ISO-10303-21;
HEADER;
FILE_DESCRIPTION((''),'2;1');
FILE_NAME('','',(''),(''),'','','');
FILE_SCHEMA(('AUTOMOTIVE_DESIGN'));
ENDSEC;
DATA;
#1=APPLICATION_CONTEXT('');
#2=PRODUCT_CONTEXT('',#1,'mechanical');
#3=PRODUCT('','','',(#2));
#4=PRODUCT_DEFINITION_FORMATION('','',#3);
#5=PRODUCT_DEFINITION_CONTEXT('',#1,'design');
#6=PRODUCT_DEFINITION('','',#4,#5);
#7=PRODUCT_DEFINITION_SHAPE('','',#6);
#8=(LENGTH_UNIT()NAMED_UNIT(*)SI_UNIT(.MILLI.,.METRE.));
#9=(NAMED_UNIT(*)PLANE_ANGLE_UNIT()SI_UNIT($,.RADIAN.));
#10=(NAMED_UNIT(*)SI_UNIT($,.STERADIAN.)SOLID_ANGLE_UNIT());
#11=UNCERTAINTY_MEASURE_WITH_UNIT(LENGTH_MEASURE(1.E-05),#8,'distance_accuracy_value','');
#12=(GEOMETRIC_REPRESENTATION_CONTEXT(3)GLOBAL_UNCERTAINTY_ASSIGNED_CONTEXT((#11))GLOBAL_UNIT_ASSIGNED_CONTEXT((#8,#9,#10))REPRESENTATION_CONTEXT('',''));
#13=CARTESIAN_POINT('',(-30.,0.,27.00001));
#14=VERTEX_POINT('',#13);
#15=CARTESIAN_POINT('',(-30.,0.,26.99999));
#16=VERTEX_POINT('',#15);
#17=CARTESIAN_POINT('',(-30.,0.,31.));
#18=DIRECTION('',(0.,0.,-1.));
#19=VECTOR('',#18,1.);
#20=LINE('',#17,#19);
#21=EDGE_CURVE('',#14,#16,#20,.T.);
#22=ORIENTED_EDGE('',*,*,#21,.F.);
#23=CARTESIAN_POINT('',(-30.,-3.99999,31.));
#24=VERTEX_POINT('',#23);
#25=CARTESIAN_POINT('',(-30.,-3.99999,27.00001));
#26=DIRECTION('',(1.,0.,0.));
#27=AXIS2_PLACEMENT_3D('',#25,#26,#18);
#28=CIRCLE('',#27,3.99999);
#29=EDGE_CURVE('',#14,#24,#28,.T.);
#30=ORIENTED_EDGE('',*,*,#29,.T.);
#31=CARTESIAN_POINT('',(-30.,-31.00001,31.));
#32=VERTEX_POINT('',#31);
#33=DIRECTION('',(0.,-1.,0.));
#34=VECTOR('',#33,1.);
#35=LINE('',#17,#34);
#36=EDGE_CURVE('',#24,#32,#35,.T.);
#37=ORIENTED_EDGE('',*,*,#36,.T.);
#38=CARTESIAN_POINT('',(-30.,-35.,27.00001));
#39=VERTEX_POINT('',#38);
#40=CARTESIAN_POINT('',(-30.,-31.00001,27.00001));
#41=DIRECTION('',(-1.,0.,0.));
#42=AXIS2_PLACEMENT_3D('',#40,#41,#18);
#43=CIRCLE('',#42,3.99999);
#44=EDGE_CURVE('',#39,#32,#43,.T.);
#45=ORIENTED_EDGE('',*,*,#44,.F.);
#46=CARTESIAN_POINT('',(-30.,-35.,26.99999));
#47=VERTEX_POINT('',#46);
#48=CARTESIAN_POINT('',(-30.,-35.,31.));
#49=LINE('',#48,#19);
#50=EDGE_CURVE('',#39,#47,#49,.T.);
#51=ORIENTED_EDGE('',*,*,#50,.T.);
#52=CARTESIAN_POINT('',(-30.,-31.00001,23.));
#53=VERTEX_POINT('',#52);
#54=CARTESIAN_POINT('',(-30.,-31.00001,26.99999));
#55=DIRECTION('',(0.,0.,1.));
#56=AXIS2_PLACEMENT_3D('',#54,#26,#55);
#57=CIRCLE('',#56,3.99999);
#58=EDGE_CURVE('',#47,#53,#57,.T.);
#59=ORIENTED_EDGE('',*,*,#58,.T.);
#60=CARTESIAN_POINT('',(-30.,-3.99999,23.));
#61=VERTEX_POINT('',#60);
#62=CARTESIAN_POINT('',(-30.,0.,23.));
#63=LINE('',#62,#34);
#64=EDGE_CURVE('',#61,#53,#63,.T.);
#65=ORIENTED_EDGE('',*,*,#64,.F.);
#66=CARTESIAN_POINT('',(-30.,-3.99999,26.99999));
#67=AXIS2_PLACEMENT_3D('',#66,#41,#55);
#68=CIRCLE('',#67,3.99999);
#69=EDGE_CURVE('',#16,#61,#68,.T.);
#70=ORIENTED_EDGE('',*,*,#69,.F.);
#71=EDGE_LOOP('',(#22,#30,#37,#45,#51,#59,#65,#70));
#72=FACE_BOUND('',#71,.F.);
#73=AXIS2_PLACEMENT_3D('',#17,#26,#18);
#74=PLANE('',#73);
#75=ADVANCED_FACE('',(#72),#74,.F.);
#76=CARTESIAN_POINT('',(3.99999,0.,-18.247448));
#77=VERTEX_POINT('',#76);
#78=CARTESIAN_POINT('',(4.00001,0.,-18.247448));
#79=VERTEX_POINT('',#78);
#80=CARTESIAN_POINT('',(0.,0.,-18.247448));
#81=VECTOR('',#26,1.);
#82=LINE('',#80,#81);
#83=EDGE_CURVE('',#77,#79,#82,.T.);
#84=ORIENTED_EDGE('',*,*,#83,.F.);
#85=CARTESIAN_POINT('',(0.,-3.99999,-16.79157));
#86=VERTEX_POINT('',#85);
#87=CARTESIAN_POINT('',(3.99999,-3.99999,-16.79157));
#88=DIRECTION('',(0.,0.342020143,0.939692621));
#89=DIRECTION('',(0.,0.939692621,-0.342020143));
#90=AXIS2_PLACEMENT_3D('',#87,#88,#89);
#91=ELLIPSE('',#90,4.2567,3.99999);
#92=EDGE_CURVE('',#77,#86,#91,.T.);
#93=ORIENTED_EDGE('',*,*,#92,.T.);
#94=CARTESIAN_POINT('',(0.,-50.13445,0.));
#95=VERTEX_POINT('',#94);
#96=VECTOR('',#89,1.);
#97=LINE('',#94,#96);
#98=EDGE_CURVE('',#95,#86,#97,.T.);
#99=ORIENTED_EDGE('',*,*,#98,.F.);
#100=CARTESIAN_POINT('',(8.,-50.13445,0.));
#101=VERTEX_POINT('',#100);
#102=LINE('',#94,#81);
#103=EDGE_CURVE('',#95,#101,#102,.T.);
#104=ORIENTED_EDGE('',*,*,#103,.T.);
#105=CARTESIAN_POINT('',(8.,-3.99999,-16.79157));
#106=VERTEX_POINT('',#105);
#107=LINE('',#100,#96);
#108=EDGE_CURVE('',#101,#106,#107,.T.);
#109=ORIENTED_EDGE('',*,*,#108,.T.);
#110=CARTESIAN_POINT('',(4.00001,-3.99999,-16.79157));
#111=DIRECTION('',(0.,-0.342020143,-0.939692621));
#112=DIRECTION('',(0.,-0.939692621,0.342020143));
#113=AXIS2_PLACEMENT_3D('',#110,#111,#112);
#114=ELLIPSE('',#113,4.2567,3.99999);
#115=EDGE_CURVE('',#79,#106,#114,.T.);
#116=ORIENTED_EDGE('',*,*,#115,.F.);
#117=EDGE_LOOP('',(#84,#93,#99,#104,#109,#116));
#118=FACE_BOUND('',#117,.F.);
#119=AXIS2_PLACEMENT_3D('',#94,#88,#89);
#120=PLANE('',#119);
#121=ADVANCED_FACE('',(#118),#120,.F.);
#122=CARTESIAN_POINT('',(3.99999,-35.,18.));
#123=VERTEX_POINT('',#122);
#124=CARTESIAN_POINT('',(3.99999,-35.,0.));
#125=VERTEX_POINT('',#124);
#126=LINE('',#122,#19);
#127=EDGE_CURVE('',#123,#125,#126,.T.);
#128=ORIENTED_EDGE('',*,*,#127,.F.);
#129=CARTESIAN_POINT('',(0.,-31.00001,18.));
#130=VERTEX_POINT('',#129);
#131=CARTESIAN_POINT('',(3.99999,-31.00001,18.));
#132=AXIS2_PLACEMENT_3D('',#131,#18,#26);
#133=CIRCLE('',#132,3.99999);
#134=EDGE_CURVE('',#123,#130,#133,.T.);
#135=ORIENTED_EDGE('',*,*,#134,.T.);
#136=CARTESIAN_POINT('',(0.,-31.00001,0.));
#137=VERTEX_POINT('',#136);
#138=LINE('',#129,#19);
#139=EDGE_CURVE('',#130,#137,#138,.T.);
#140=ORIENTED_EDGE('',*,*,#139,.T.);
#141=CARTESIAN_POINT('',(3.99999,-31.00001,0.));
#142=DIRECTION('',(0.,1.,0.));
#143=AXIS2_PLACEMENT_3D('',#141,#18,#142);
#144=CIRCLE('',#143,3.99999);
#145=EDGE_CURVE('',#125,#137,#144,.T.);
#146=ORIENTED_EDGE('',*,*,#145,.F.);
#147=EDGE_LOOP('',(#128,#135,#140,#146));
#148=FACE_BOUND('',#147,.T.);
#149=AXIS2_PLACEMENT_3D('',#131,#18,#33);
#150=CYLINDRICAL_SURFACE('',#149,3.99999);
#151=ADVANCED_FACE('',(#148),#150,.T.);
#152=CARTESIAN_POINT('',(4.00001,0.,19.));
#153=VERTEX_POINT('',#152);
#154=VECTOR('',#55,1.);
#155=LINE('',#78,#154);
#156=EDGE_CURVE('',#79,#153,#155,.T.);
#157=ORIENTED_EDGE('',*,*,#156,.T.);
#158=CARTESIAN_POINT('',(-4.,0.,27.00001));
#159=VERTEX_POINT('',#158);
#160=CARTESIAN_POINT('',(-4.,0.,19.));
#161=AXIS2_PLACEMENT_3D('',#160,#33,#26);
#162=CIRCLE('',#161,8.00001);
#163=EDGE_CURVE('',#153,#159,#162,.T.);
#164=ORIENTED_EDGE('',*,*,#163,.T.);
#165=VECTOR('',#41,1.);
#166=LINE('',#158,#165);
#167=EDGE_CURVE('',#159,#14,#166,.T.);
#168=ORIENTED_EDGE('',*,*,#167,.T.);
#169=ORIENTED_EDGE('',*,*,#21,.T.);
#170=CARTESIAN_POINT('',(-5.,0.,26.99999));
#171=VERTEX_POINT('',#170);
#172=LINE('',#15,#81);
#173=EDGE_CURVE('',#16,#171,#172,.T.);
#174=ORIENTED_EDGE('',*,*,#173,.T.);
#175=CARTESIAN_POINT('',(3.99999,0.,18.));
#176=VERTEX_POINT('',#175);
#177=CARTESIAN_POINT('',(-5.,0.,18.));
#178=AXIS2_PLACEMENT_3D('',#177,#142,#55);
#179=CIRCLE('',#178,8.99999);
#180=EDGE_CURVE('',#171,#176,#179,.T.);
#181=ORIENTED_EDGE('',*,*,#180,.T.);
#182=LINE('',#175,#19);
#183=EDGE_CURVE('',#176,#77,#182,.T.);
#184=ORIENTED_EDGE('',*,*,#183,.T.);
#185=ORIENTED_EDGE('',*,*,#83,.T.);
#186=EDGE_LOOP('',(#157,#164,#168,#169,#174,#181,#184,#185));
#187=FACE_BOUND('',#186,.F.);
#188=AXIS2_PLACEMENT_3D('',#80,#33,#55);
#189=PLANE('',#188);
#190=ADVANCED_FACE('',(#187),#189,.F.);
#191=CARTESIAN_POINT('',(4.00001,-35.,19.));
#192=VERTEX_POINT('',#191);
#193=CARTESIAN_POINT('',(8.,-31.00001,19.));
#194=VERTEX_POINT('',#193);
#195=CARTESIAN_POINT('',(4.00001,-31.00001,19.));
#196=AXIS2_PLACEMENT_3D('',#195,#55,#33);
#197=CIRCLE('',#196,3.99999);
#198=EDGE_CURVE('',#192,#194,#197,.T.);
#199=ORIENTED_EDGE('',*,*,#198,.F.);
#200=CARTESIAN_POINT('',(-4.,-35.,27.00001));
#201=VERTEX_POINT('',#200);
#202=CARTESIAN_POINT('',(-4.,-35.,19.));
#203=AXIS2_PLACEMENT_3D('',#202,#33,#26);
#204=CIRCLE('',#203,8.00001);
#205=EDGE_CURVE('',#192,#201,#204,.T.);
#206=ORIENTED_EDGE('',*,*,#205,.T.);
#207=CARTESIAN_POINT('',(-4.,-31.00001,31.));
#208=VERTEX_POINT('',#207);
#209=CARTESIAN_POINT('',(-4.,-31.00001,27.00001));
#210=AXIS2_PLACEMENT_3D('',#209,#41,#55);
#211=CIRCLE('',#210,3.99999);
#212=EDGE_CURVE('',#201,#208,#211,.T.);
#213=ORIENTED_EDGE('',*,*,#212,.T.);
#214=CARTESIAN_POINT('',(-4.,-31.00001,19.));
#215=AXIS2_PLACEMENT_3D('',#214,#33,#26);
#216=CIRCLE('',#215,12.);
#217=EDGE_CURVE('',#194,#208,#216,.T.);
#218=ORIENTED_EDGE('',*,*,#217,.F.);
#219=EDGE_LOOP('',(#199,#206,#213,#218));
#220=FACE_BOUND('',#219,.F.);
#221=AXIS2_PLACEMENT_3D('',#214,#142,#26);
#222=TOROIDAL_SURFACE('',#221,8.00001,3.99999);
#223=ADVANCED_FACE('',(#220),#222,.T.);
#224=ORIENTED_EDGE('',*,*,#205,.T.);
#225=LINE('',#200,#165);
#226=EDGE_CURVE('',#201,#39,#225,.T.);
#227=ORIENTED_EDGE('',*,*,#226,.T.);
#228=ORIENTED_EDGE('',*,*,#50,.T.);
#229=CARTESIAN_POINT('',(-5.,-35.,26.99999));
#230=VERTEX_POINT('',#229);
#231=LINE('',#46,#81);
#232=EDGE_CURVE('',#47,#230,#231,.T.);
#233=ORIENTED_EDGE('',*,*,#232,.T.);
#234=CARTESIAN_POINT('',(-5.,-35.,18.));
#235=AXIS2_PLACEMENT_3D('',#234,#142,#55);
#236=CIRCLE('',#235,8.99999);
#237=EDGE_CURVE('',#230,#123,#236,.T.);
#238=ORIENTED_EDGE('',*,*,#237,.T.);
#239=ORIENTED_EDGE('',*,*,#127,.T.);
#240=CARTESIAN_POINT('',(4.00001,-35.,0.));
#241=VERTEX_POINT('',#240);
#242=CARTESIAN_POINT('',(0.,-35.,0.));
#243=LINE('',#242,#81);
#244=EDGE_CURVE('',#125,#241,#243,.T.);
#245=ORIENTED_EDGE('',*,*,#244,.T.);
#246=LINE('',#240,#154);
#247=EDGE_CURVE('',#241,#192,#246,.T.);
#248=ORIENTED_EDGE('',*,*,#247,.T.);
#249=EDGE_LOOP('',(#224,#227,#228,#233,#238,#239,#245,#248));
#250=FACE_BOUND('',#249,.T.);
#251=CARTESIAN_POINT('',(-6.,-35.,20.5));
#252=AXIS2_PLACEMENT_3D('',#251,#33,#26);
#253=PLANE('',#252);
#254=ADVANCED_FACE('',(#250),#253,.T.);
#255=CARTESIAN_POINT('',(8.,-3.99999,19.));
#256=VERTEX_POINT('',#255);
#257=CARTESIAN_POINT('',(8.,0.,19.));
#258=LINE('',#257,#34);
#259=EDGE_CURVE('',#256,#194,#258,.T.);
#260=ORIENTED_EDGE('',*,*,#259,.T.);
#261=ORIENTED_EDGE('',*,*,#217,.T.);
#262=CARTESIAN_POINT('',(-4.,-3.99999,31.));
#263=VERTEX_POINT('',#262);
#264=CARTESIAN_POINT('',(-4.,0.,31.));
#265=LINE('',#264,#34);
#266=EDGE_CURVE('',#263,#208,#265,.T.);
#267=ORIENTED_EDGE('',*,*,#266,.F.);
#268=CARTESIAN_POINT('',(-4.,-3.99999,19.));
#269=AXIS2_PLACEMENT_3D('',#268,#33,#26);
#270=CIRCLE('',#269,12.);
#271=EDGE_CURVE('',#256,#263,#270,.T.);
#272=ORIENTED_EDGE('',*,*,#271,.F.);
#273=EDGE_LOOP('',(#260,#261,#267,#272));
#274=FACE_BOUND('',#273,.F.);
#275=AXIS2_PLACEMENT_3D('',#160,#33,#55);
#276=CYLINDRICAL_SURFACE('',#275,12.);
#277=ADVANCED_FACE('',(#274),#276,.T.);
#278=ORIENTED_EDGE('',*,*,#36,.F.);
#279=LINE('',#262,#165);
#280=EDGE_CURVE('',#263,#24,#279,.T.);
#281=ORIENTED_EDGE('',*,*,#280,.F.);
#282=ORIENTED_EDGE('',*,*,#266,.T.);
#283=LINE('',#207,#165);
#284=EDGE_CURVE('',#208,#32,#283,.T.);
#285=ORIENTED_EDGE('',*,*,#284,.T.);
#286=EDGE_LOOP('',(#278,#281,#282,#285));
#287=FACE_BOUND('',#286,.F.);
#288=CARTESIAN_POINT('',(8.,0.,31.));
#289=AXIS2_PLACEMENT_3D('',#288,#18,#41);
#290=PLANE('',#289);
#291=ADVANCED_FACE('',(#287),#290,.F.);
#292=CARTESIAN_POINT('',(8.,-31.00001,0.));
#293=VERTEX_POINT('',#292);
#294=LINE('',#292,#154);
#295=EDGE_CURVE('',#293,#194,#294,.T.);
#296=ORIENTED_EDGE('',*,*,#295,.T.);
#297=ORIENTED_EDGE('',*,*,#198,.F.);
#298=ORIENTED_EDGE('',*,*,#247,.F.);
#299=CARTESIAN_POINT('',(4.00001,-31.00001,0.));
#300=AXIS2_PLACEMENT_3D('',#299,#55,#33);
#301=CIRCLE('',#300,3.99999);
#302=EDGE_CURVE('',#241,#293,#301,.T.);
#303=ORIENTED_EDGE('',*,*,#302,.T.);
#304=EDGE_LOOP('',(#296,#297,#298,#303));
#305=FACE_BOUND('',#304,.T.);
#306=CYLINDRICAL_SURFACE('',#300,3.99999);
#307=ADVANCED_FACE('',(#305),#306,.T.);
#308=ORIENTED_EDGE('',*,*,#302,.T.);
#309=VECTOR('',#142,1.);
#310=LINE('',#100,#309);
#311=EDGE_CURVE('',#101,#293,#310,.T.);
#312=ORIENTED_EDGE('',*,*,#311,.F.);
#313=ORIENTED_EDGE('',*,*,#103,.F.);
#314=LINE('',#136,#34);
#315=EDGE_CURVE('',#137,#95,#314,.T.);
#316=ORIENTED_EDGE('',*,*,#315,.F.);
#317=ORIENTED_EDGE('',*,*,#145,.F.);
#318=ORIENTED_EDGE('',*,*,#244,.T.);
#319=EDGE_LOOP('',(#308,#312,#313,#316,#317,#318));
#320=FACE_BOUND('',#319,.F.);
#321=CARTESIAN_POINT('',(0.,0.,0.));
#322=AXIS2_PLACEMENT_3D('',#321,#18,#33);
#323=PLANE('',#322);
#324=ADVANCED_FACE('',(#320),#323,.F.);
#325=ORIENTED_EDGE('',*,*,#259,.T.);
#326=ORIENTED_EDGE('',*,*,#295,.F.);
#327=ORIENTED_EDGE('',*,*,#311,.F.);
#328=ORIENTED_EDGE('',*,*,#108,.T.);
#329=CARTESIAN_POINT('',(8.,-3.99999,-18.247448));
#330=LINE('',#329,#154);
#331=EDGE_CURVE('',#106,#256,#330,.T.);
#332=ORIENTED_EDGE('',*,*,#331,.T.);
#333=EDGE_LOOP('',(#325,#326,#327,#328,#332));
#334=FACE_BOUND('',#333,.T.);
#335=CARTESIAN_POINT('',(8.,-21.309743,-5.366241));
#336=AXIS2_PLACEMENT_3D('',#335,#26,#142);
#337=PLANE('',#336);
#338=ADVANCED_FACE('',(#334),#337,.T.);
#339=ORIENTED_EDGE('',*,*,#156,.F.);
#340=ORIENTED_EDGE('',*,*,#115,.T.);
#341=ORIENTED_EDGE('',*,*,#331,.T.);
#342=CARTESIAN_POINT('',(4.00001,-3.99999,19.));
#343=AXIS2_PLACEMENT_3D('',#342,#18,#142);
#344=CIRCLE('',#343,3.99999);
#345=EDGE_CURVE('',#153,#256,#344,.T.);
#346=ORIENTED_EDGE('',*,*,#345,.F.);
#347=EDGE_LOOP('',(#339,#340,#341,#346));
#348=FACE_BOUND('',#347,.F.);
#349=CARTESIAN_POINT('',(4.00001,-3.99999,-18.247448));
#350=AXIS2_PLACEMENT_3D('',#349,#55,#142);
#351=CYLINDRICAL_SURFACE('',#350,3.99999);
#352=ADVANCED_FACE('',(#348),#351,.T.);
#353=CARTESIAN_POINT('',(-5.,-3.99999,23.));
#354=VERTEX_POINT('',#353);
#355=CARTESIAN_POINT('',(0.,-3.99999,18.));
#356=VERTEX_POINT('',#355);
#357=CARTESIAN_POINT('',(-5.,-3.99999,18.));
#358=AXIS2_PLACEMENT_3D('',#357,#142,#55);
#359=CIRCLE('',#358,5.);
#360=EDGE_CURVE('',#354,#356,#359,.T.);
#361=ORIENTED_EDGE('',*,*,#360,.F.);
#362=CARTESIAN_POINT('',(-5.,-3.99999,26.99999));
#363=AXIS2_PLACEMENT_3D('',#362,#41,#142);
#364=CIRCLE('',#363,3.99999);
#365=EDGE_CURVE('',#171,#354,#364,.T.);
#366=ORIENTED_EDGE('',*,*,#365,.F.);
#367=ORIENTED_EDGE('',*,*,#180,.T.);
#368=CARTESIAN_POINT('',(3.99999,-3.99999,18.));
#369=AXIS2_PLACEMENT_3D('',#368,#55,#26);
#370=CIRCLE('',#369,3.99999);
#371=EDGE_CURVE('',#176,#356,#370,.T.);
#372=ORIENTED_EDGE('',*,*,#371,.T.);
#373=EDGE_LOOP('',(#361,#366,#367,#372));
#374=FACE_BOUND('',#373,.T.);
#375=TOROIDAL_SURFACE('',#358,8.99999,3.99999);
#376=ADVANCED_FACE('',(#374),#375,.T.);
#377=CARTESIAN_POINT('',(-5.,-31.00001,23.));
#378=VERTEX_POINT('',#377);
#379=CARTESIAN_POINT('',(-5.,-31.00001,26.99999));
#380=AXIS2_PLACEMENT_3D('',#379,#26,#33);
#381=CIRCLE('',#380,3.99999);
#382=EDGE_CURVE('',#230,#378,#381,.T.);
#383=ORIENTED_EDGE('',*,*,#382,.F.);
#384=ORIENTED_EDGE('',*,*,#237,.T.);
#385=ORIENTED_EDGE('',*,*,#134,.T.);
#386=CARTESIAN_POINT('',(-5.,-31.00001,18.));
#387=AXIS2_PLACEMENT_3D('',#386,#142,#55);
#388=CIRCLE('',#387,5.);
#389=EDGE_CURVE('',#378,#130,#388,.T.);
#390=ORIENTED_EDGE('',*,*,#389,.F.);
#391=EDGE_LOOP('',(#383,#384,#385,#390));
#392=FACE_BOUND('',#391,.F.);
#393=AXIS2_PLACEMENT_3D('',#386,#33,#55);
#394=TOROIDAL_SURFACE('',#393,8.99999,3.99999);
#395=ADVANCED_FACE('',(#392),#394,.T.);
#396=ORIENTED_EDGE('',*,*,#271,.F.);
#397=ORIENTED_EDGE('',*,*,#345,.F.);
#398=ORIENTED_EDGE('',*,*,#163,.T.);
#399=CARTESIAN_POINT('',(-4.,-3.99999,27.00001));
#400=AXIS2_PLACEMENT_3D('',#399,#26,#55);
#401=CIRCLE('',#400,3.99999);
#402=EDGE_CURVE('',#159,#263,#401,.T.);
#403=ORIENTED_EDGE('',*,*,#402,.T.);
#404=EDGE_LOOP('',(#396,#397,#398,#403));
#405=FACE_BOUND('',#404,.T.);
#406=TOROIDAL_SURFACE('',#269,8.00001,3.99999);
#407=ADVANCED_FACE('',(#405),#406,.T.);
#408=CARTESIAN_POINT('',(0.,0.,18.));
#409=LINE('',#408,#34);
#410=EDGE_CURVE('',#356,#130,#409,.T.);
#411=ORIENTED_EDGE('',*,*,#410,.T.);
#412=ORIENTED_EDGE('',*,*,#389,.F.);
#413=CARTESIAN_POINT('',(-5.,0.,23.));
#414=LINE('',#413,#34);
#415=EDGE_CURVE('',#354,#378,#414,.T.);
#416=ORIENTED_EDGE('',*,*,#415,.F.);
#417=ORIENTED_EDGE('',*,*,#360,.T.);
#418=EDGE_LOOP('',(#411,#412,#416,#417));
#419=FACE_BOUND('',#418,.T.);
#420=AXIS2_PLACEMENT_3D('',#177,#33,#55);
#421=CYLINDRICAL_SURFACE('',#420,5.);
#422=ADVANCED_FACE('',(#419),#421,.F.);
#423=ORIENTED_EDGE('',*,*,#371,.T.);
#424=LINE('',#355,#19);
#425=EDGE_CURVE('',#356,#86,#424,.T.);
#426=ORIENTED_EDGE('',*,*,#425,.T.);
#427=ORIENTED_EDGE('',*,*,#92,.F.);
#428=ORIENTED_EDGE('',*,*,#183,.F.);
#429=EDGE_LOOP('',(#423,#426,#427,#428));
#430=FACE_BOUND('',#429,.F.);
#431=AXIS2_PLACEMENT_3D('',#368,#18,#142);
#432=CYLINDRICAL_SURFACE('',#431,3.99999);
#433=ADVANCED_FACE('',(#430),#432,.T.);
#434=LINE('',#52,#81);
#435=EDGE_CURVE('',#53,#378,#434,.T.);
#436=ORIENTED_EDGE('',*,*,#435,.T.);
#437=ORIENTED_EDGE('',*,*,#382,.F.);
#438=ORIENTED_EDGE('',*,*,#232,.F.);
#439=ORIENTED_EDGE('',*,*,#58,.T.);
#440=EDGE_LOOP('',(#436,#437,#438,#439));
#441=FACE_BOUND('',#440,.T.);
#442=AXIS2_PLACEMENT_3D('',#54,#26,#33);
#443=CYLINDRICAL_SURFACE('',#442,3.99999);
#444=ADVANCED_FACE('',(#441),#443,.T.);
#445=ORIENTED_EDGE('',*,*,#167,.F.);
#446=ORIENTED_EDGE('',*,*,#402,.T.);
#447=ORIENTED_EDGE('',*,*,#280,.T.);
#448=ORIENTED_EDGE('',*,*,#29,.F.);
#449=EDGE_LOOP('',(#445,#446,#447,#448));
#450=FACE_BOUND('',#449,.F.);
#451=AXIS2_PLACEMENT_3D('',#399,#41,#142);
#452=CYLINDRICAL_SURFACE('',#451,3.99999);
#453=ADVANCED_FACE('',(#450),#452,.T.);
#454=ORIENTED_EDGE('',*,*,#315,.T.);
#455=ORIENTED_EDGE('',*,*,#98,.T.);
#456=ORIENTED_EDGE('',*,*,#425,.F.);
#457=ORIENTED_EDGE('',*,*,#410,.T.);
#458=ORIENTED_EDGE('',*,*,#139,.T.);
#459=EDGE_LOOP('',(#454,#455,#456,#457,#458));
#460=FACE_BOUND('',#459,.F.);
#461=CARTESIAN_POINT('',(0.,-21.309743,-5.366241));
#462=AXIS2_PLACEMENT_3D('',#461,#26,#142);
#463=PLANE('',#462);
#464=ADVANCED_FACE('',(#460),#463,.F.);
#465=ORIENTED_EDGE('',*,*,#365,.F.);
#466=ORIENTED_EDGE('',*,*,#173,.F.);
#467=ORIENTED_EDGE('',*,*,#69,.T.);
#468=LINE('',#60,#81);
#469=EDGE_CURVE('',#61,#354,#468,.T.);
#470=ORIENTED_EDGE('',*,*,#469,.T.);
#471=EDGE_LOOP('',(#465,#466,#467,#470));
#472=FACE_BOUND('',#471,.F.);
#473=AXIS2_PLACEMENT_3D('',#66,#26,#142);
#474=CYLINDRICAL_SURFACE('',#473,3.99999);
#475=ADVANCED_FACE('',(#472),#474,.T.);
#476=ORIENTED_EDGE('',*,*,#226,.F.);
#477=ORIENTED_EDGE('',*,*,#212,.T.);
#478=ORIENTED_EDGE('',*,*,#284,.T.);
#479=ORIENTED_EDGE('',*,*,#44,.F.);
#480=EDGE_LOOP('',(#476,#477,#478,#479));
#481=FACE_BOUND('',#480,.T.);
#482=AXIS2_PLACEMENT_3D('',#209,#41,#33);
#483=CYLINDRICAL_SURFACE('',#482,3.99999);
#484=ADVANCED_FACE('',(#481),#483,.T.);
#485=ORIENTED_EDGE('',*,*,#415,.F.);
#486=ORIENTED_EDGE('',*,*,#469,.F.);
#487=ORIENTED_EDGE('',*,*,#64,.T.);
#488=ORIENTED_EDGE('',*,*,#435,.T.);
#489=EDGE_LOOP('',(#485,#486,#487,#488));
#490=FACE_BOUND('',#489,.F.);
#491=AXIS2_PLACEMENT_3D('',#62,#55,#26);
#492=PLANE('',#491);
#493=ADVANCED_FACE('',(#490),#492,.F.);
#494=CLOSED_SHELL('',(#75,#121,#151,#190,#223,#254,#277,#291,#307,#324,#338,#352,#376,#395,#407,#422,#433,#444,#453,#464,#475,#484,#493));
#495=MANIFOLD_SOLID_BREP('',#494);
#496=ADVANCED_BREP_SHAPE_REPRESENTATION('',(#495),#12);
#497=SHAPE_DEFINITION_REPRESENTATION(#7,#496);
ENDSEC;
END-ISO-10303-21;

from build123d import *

# Parameters (mm, degrees)
F1_DEPTH = 35
F3_DEPTH = 8
F4_R     = 5
F5_R     = 12
F6_R     = 3.99999
F7_R     = 3.99999


# Not quite as in the source:
# - a fillet or chamfer is up to 0.001 mm smaller than in the source, because OpenCascade refuses the exact size


with BuildPart() as f1:
    # F0 (on Front) → F1 (new body)
    with BuildSketch(Plane.XZ):
        Polygon((-30, 31), (-30, 23), (0, 23), (0, 0), (8, 0), (8, 31), align=None)
    extrude(amount=F1_DEPTH)

    # F2 (on Right) → F3 (join)
    with BuildSketch(Plane.YZ):
        Polygon((0, 0), (-50.1344501972, 0), (0, -18.2474475831), align=None)
    extrude(amount=F3_DEPTH)

    # F4
    f4_edges = [f1.edges().sort_by_distance(p)[0] for p in [
        (0, -17.5, 23),
    ]]
    fillet(f4_edges, radius=F4_R)

    # F5
    f5_edges = [f1.edges().sort_by_distance(p)[0] for p in [
        (8, -17.5, 31),
    ]]
    fillet(f5_edges, radius=F5_R)

    # F6 (radius 4 in the source; OpenCascade refuses exactly that, so slightly less here)
    f6_edges = [f1.edges().sort_by_distance(p)[0] for p in [
        (-17, -35, 31),
        (-17.5, -35, 23),
        (4.485281, -35, 27.485281),
        (-1.464466, -35, 21.535534),
        (0, -35, 9),
        (8, -35, 9.5),
    ]]
    fillet(f6_edges, radius=F6_R)

    # F7 (radius 4 in the source; OpenCascade refuses exactly that, so slightly less here)
    f7_edges = [f1.edges().sort_by_distance(p)[0] for p in [
        (-17, 0, 31),
        (-17.5, 0, 23),
        (0, 0, -0.123724),
        (8, 0, 0.376276),
        (4.485281, 0, 27.485281),
        (-1.464466, 0, 21.535534),
    ]]
    fillet(f7_edges, radius=F7_R)


solid = f1.part
